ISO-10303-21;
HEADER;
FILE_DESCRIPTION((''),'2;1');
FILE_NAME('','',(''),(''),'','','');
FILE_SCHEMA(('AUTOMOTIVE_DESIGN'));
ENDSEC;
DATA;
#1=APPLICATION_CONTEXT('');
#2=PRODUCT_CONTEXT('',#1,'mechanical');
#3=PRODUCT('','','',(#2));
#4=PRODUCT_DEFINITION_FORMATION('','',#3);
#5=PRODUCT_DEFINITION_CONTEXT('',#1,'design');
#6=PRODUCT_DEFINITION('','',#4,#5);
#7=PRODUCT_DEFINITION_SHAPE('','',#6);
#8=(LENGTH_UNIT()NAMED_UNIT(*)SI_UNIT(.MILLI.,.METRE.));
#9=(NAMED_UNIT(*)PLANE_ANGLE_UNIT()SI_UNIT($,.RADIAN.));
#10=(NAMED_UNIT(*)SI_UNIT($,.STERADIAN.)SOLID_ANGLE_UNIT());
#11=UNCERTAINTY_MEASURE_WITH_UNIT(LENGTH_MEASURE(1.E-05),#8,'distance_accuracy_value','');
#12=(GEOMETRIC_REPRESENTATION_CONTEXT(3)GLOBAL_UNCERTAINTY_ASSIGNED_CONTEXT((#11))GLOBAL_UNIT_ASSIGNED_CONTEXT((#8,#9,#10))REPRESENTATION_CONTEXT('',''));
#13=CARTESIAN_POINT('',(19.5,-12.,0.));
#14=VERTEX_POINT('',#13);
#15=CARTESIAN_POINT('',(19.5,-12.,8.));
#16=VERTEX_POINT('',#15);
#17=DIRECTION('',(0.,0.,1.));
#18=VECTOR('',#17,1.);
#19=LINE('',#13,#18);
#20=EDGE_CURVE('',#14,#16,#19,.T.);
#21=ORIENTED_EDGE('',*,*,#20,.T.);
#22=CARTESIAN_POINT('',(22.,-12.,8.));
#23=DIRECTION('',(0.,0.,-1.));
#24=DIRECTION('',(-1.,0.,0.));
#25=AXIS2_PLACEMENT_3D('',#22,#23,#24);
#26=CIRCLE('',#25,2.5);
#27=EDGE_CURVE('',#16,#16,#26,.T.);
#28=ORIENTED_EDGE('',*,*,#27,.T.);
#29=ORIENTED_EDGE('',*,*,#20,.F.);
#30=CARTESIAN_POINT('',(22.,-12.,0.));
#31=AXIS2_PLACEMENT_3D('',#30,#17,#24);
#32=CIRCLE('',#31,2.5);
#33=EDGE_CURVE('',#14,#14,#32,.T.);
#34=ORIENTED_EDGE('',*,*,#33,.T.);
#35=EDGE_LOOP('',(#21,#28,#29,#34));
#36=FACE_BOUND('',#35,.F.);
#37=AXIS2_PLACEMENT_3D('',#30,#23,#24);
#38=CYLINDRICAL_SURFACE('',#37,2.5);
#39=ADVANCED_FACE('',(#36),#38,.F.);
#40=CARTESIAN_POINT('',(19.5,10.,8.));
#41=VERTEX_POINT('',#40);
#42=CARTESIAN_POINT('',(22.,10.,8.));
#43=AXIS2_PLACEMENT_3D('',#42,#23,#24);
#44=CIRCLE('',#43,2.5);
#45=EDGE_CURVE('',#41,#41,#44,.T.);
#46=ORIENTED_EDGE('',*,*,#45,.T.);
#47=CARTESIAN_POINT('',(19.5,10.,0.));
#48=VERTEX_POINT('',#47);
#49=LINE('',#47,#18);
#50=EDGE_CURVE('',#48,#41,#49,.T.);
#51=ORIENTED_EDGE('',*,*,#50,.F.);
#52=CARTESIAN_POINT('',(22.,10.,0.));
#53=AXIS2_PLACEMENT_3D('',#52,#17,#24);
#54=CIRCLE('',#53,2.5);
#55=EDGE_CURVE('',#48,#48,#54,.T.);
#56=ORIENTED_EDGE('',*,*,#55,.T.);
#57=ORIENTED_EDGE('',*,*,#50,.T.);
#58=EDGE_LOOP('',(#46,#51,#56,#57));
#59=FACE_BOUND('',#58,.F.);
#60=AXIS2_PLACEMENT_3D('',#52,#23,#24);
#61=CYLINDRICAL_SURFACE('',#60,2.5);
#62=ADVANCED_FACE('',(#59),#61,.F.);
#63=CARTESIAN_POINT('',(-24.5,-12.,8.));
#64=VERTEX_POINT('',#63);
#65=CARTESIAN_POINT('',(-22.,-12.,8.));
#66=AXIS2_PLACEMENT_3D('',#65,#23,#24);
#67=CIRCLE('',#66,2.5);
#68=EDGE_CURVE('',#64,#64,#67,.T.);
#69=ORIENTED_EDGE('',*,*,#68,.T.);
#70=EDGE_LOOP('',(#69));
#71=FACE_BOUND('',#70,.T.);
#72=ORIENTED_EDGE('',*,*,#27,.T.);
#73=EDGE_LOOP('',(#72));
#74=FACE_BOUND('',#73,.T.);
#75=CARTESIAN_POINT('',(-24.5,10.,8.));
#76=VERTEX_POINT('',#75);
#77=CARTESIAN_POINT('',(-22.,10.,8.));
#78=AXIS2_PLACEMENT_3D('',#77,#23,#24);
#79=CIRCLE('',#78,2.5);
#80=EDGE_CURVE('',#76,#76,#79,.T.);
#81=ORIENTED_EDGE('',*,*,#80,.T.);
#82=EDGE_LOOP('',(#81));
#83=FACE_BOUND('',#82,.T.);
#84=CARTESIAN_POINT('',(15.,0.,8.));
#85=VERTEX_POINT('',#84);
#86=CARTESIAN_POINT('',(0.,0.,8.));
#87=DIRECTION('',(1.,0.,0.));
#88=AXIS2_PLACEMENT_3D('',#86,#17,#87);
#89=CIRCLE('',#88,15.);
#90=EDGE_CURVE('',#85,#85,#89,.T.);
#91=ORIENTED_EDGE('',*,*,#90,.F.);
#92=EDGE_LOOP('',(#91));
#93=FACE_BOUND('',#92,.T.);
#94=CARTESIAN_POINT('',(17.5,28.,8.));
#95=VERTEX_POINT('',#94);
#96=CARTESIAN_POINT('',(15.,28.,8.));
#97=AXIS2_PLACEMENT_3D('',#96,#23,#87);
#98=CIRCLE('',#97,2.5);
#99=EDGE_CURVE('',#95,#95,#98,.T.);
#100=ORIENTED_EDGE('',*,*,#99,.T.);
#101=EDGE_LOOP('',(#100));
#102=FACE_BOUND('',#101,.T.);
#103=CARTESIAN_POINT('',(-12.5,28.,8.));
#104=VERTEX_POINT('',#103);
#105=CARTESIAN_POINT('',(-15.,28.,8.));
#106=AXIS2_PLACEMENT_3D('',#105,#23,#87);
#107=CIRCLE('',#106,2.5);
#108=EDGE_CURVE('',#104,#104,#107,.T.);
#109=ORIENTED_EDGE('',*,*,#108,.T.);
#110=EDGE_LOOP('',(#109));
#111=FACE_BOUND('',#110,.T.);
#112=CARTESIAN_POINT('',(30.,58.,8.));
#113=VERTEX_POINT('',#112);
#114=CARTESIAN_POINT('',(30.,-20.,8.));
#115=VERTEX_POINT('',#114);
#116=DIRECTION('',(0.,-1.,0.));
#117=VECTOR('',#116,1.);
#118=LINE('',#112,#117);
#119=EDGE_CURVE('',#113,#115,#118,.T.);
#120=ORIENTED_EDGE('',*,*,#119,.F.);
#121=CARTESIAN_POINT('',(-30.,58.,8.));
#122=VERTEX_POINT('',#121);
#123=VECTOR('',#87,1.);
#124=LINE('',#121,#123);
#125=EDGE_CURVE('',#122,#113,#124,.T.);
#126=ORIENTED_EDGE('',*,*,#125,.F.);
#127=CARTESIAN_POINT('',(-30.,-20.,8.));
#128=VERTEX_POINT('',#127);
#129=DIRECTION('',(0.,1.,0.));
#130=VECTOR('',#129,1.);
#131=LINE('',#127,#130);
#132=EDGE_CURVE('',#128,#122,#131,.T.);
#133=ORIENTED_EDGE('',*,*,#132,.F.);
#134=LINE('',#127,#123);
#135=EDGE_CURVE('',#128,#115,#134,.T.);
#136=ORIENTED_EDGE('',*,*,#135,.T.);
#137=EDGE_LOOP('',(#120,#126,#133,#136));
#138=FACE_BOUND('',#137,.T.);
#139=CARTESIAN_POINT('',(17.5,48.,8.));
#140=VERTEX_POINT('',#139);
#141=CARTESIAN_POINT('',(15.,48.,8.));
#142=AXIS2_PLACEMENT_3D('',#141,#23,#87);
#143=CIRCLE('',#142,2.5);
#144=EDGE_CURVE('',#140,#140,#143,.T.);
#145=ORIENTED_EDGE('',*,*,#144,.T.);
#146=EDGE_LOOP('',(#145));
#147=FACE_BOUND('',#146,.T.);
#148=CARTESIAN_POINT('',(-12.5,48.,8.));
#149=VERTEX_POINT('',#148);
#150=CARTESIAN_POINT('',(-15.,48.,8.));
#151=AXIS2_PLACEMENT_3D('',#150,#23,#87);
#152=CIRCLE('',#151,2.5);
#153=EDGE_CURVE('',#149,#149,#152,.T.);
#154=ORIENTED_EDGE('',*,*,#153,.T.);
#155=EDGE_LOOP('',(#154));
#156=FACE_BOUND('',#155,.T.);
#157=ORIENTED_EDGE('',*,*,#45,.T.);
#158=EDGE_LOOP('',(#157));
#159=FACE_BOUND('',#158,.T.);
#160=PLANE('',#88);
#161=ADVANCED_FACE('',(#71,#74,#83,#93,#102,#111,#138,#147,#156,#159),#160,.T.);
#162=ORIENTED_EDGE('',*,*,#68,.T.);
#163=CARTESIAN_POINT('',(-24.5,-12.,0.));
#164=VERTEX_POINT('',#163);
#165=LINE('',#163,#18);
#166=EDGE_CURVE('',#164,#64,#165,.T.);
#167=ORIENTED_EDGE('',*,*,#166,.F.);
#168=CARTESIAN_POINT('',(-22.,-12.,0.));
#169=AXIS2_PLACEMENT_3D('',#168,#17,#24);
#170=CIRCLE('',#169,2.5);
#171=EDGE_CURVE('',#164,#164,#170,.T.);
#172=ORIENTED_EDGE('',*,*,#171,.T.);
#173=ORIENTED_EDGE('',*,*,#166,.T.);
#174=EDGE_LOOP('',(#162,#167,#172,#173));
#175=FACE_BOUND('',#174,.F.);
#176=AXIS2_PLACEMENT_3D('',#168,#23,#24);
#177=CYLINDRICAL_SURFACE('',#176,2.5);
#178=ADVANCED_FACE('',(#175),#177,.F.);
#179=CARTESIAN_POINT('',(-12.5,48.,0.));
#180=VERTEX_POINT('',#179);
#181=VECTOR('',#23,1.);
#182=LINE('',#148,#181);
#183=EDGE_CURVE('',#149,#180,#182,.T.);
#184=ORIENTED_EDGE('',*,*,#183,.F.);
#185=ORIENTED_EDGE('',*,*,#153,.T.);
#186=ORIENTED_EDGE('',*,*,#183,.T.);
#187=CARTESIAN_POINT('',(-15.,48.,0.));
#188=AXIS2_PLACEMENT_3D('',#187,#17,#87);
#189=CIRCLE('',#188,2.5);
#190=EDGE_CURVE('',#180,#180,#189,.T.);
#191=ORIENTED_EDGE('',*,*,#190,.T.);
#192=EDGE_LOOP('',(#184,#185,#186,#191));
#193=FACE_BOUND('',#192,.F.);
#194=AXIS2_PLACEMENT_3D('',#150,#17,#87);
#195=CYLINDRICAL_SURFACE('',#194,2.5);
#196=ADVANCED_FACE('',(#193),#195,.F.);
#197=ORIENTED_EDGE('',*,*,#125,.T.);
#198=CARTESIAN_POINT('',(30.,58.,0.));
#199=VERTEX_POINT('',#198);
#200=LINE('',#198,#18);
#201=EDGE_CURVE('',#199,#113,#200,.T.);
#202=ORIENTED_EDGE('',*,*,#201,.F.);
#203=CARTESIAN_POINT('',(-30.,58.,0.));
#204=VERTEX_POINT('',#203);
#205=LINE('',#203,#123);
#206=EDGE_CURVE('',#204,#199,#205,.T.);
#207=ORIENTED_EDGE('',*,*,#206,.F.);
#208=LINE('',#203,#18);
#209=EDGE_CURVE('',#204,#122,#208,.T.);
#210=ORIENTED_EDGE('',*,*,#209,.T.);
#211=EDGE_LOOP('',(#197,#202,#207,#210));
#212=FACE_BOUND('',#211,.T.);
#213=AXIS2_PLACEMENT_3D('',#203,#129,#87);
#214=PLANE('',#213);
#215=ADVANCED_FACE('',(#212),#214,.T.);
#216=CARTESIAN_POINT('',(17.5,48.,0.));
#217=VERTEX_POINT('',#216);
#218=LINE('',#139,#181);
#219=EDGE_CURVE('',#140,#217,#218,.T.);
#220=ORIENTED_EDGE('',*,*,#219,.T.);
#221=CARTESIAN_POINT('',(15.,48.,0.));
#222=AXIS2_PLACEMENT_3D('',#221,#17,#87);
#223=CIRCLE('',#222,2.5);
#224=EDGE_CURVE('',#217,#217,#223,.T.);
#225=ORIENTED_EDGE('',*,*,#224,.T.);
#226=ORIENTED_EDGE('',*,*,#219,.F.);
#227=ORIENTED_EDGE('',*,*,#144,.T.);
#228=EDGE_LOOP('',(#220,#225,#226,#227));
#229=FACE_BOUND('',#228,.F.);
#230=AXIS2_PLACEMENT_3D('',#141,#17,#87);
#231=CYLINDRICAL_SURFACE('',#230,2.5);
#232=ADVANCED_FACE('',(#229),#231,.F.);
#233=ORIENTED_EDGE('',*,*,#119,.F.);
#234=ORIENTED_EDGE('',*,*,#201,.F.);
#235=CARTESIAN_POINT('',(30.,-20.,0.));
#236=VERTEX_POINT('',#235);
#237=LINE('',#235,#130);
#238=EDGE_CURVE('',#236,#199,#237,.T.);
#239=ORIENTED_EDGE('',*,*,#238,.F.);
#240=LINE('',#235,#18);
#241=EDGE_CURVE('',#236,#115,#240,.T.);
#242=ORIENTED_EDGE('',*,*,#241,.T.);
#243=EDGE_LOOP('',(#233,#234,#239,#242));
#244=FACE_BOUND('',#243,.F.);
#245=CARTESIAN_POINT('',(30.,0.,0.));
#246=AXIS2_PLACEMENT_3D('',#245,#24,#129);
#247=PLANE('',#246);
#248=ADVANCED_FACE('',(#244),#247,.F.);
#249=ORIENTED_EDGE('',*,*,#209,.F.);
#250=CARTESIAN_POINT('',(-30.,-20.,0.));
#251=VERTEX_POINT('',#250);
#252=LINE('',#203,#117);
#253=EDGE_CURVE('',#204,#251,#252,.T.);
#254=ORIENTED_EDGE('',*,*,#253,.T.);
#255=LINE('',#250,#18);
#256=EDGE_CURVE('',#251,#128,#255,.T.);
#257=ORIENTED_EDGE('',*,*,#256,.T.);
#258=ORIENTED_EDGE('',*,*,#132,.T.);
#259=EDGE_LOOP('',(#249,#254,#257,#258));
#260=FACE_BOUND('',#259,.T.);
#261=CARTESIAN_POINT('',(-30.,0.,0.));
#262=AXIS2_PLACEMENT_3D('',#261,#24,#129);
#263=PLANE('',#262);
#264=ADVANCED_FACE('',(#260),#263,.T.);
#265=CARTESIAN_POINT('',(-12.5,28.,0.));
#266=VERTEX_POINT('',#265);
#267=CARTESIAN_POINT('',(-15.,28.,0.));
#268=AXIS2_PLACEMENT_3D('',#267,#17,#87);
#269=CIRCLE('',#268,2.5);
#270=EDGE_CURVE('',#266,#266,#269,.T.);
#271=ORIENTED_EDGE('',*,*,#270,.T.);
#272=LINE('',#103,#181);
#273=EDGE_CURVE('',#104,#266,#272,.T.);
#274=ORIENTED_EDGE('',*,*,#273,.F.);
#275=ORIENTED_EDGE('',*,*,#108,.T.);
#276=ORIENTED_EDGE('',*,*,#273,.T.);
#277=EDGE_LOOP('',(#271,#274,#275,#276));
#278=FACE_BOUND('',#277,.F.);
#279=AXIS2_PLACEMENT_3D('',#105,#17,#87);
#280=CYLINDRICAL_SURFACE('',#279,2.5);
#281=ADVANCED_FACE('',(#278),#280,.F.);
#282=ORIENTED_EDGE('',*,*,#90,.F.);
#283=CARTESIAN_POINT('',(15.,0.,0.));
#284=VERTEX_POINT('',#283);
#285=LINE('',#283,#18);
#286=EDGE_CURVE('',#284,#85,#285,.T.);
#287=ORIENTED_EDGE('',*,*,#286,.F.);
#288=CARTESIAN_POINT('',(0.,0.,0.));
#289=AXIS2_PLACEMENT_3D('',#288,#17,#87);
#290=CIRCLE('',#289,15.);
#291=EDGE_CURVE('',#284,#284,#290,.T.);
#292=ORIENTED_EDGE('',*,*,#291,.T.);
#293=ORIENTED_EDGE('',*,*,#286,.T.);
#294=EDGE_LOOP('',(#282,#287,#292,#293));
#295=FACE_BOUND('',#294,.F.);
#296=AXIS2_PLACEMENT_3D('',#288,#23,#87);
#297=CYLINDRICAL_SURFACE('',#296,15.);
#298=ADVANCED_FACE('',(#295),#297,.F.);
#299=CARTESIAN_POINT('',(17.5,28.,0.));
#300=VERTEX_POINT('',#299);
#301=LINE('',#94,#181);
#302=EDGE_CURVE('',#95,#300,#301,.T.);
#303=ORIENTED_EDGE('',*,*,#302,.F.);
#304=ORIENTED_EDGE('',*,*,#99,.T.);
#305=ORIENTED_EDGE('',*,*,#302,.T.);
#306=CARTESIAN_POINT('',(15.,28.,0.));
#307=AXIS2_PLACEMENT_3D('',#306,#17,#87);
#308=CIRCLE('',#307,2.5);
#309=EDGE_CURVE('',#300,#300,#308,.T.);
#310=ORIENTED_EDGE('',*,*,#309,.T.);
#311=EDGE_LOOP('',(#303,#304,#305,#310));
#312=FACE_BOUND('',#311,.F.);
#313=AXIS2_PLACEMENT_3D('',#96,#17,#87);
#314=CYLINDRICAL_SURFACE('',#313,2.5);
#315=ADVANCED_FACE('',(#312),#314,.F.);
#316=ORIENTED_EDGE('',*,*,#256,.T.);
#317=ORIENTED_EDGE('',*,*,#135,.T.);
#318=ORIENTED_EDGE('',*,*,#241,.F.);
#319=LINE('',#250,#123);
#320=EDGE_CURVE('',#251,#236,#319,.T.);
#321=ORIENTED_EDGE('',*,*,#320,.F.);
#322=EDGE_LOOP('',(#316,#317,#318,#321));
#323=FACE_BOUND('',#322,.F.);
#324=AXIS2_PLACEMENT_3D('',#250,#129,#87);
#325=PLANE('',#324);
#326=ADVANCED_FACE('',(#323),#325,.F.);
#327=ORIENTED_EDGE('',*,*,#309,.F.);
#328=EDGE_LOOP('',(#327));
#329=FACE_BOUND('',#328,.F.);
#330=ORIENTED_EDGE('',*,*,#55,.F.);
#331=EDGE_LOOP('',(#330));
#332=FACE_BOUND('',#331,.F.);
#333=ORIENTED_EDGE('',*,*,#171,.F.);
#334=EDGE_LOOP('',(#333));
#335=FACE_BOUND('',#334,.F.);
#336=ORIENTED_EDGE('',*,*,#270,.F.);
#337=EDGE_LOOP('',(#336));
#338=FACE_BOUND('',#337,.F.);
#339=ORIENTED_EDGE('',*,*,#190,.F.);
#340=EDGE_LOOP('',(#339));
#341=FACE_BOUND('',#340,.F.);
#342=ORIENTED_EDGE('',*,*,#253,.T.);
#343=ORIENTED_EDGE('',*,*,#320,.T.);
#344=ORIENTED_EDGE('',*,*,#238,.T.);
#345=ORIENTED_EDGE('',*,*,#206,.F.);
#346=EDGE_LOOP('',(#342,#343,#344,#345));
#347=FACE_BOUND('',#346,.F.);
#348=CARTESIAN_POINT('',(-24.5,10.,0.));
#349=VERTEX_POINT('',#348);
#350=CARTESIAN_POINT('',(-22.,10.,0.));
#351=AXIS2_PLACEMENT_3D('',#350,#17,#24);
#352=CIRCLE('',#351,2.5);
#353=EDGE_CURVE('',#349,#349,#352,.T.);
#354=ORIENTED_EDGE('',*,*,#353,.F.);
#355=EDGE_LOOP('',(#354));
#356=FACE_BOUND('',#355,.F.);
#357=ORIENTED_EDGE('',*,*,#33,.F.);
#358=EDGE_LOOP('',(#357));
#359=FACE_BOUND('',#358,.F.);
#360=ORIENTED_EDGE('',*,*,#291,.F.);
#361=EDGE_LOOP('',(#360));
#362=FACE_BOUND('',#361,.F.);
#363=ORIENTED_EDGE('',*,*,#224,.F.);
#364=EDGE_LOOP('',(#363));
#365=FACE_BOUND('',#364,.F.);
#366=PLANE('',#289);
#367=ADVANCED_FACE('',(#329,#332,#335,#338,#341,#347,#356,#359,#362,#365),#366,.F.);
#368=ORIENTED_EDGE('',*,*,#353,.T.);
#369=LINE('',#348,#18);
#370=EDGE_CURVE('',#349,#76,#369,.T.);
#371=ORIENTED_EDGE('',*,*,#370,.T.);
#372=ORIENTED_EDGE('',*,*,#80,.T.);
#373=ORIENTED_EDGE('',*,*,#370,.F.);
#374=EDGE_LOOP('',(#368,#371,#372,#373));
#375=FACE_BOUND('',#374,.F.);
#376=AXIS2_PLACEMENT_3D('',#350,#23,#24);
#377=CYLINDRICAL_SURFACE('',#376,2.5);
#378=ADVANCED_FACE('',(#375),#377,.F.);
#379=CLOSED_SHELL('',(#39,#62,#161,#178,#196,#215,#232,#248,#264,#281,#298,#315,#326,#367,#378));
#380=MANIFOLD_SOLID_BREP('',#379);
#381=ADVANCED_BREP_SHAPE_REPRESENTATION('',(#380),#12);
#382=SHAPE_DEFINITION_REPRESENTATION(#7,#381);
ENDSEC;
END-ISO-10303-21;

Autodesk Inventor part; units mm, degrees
ref_plane "YZ Plane" through (0, 0, 0) normal (1, 0, 0) x (0, 1, 0)
ref_plane "XZ Plane" through (0, 0, 0) normal (0, 1, 0) x (-1, 0, 0)
ref_plane "XY Plane" through (0, 0, 0) normal (0, 0, 1) x (1, 0, 0)
sketch "Szkic1" plane through (0, 0, 0) normal (0, 0, 1) x (1, 0, 0)
  line L0 (-30, 58) -> (30, 58)
  circle A0 centre (0, 0) radius 15
  line L1 (0, 0) -> (30, 0)
  line L2 (30, 0) -> (30, 58)
  line L3 (-30, 0) -> (-30, 58)
  line L4 (-30, 0) -> (-30, -20)
  line L5 (-30, -20) -> (30, -20)
  line L6 (30, -20) -> (30, 0)
  dimension "d2" = 30
  dimension "d7" = 78
  dimension "d8" = 60
  dimension "d9" = 20
extrude "Wyciągnięcie proste1" add sketch "Szkic1" along normal blind 8
sketch "Szkic2" plane through (0, 0, 8) normal (0, 0, 1) x (1, 0, 0)
  line L0 (30, 58) -> (-30, 58) projected
  line L1 (-30, 58) -> (-30, 18)
  line L2 (-30, 58) -> (-30, -20) projected
  line L3 (-30, 18) -> (30, 18)
  line L4 (30, -20) -> (30, 58) projected
  line L5 (30, 18) -> (30, 58)
  line L6 (-30, 58) -> (-30, 48)
  line L7 (-30, 18) -> (-30, 28)
  line L8 (-30, 28) -> (30, 28)
  line L9 (-30, 48) -> (30, 48)
  line L10 (-30, 48) -> (-15, 48)
  line L11 (-15, 48) -> (-15, 28)
  line L12 (30, 48) -> (15, 48)
  line L13 (15, 48) -> (15, 28)
  circle A0 centre (-15, 48) radius 2.5
  circle A1 centre (15, 48) radius 2.5
  circle A2 centre (-15, 28) radius 2.5
  circle A3 centre (15, 28) radius 2.5
  point P0 (0, 0)
  dimension "d12" = 40
  dimension "d13" = 90
  dimension "d14" = 10
  dimension "d15" = 10
  dimension "d16" = 15
  dimension "d17" = 15
  dimension "d18" = 5
  dimension "d19" = 5
  dimension "d20" = 5
  dimension "d21" = 5
extrude "Wyciągnięcie proste2" cut sketch "Szkic2" against normal up to next contours A1 L13 L9 | L9 A1 | A0 L9 | L9 L11 A0 | A3 L8 | L8 L13 A3 | L13 A1 L9 | A2 L11 L8 | L8 A2 | L9 A0 L11 | L8 A3 L13 | L11 A2 L8
sketch "Szkic3" plane through (0, 0, 0) normal (0, 0, -1) x (-1, 0, 0)
  circle A0 centre (0, 0) radius 15
  line L0 (-30, -20) -> (30, -20)
  line L1 (30, -20) -> (30, 18)
  line L2 (30, 18) -> (-30, 18)
  line L3 (-30, 18) -> (-30, -20)
  line L4 (-30, 18) -> (-30, -20)
  line L5 (-30, 18) -> (-22, 18)
  line L6 (30, 18) -> (-30, 18)
  line L7 (-22, 18) -> (-22, -20)
  line L8 (30, 18) -> (22, 18)
  line L9 (22, 18) -> (22, -20)
  line L10 (-22, 18) -> (-22, 10)
  line L11 (-22, -20) -> (-22, -12)
  line L12 (22, 18) -> (22, 10)
  line L13 (22, -20) -> (22, -12)
  circle A1 centre (-22, 10) radius 2.5
  circle A2 centre (-22, -12) radius 2.5
  circle A3 centre (22, 10) radius 2.5
  circle A4 centre (22, -12) radius 2.5
  circle A5 centre (-15, 28) radius 2.5 projected
  circle A6 centre (-15, 48) radius 2.5 projected
  circle A7 centre (15, 48) radius 2.5 projected
  circle A8 centre (15, 28) radius 2.5 projected
  circle A9 centre (0, 0) radius 15 projected
  line L14 (30, 58) -> (-30, 58) projected
  line L15 (-30, 58) -> (-30, -20) projected
  line L16 (-30, -20) -> (30, -20) projected
  line L17 (30, -20) -> (30, 58) projected
  point P0 (0, -1)
  dimension "d24" = 8
  dimension "d25" = 8
  dimension "d26" = 8
  dimension "d27" = 8
  dimension "d28" = 8
  dimension "d29" = 8
  dimension "d30" = 5
  dimension "d31" = 5
  dimension "d32" = 5
  dimension "d33" = 5
extrude "Wyciągnięcie proste3" cut sketch "Szkic3" against normal up to next contours A2 L7 | L7 A2 | A4 L9 | L9 A4 | A1 L7 | L7 A1 | A3 L9 | L9 A3
thread "Gwint1" size "M5x0.8" class "6H" standard "ANSI Metric M Profile" full length
thread "Gwint2" size "M5x0.8" class "6H" standard "ANSI Metric M Profile" full length
thread "Gwint3" size "M5x0.8" class "6H" standard "ANSI Metric M Profile" full length
thread "Gwint4" size "M5x0.8" class "6H" standard "ANSI Metric M Profile" full length
properties part number "Uchwyt silnika krokowego osi Y - płaski"
